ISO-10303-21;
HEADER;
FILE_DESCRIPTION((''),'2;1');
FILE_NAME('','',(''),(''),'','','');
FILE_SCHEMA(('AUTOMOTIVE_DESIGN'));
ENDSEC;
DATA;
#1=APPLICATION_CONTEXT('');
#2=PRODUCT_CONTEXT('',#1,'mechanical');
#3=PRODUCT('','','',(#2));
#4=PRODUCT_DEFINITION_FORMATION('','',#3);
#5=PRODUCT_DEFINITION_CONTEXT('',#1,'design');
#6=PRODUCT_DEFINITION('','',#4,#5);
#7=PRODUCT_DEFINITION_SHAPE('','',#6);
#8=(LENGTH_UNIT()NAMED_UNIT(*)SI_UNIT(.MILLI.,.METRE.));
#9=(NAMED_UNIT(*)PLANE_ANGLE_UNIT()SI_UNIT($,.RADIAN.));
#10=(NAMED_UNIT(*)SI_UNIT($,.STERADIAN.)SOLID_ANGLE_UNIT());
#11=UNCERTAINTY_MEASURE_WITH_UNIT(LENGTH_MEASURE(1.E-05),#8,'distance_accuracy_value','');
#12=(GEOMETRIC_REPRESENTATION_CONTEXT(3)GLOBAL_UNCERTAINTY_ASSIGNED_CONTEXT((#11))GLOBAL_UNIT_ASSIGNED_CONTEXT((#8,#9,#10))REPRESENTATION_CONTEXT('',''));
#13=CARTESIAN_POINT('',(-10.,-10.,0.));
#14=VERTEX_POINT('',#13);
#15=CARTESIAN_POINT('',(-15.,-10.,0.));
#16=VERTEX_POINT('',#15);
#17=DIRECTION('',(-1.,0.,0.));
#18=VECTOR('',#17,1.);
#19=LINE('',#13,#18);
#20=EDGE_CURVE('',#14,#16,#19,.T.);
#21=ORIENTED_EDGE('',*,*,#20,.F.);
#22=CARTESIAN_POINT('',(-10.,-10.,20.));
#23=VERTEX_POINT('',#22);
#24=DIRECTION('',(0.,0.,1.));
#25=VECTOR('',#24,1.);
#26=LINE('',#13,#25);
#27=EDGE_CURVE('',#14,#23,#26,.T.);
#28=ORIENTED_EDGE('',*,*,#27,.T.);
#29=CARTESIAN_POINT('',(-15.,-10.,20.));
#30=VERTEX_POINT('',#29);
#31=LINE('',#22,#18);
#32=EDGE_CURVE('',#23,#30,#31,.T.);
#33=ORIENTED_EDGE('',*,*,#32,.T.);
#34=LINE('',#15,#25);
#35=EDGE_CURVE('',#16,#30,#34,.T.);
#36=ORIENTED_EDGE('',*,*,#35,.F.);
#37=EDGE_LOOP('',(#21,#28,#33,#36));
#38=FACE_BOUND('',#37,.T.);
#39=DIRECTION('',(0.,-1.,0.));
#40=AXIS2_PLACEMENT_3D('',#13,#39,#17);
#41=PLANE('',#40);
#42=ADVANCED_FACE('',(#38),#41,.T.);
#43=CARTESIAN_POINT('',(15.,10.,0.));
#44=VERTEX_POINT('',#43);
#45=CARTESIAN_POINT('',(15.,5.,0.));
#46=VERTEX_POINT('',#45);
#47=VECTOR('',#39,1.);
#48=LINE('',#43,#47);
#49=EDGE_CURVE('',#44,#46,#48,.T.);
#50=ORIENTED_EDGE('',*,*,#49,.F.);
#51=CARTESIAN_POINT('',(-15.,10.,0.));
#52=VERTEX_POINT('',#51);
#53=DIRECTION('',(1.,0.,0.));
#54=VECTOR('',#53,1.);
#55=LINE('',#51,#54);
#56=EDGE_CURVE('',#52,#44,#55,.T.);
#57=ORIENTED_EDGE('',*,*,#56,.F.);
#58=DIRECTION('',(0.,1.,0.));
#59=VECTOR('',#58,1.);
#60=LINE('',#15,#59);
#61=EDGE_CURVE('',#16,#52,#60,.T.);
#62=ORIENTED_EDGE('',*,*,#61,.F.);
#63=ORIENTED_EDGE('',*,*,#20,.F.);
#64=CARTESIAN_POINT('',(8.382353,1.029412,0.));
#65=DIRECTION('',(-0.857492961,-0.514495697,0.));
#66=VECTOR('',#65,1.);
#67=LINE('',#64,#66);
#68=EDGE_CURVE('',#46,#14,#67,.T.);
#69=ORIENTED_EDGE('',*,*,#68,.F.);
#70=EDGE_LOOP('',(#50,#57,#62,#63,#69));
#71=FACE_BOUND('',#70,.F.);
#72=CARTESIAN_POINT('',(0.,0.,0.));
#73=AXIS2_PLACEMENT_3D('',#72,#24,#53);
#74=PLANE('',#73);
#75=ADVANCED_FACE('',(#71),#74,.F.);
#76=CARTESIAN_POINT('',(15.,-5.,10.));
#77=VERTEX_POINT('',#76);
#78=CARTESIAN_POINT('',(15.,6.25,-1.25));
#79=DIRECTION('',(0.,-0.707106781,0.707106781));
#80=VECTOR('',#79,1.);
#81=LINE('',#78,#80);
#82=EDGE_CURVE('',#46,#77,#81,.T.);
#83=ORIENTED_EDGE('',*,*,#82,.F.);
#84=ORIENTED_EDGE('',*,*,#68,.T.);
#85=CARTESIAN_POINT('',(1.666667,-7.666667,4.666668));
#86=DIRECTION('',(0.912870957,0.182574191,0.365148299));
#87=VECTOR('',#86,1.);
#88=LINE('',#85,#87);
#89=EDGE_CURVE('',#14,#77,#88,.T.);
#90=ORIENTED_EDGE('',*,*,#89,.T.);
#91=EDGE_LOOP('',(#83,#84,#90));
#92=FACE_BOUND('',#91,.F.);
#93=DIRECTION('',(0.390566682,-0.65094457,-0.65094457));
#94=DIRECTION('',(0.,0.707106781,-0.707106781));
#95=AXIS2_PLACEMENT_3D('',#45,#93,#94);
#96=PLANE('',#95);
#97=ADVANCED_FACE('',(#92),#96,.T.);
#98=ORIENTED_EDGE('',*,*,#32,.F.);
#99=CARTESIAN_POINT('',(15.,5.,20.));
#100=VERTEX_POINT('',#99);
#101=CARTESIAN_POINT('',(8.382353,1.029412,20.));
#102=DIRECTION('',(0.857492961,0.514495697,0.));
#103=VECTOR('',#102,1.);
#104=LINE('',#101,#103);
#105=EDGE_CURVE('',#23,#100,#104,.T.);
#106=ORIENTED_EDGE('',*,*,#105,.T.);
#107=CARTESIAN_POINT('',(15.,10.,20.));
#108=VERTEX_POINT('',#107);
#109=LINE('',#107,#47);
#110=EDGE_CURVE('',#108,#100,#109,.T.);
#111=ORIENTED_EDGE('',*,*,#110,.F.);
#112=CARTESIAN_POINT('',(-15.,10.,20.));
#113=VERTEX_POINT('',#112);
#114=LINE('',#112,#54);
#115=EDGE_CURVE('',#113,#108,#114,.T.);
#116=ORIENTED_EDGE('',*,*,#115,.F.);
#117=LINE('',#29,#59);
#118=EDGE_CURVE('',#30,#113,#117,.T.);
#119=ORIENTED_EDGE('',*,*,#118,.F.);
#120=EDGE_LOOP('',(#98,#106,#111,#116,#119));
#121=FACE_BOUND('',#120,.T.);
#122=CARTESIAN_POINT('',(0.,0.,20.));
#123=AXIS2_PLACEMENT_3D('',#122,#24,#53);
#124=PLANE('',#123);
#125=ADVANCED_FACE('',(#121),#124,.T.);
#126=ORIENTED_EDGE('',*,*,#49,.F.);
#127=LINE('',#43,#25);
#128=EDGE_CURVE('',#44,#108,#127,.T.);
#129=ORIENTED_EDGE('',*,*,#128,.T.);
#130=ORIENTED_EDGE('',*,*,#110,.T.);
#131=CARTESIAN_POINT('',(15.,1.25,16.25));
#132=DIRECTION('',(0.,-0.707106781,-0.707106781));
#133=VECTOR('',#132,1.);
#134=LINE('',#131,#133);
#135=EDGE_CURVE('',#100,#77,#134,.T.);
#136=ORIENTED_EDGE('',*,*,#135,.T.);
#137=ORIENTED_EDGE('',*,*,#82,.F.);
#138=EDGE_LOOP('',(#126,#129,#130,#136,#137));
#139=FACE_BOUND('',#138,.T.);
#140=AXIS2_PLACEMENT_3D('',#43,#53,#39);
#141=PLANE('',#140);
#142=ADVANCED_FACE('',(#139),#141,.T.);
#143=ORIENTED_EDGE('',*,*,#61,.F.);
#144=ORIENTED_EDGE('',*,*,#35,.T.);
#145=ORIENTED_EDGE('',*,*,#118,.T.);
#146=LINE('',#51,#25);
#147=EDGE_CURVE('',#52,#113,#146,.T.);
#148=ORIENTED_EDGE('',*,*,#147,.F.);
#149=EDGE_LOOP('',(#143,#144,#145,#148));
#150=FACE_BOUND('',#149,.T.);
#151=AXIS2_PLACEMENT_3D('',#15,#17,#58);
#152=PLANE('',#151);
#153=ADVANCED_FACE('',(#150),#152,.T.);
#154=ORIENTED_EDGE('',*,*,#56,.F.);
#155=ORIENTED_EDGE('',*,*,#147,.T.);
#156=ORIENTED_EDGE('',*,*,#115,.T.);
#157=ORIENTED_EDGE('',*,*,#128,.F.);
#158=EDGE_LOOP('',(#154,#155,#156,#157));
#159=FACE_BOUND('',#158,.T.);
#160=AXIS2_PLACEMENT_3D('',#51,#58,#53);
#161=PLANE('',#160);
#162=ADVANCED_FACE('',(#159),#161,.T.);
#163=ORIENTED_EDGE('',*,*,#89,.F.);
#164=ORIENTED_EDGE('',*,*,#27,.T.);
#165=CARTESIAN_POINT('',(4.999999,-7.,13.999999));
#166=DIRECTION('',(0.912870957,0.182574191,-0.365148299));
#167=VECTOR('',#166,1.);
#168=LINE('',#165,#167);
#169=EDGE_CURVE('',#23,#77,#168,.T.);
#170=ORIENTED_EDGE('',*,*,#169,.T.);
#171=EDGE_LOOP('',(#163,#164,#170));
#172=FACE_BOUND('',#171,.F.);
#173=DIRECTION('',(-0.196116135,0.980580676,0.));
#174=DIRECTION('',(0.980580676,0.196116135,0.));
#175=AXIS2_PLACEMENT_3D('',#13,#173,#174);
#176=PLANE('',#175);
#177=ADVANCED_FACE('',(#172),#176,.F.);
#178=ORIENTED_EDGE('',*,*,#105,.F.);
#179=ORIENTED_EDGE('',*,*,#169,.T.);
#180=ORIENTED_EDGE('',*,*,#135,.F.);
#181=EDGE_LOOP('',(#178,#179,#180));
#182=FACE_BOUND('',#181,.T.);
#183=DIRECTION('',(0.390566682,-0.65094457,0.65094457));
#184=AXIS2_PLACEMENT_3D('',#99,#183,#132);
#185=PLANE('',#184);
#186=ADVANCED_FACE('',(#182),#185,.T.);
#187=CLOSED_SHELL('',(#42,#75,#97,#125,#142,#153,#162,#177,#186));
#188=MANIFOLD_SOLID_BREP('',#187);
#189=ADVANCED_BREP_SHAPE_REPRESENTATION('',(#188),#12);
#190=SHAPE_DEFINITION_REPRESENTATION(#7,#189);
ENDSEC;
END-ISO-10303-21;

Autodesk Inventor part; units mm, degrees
ref_plane "YZ Plane" through (0, 0, 0) normal (1, 0, 0) x (0, 1, 0)
ref_plane "XZ Plane" through (0, 0, 0) normal (0, 1, 0) x (-1, 0, 0)
sketch "草圖1" plane through (0, 0, 0) normal (0, 0, 1) x (1, 0, 0)
  line L0 (-15, 10) -> (15, 10)
  line L1 (15, 10) -> (15, -5)
  line L2 (-10, -10) -> (-15, -10)
  line L3 (-15, -10) -> (-15, 10)
  line L4 (-10, -10) -> (15, -5)
  point P0 (0, 0)
  point P1 (-15, 0)
  point P2 (0, 10)
  dimension "d0" = 30
  dimension "d1" = 20
  dimension "d2" = 5
  dimension "d3" = 15
extrude "擠出1" add sketch "草圖1" along normal blind 20
sketch "草圖2" plane through (0, 0, 20) normal (0, 0, 1) x (1, 0, 0)
  line L0 (-15, -10) -> (-10, -10) projected
  line L1 (-10, -10) -> (15, 5)
  line L2 (15, -5) -> (15, 10) projected
  point P0 (0, 0)
  dimension "d6" = 5
sketch "草圖3" plane through (15, -5, 0) normal (1, 0, 0) x (0, 0, -1)
  line L0 (-20, 0) -> (-20, 15) construction
  line L1 (-20, 10) -> (-10, 0)
  line L2 (-20, -5) -> (-20, 10) construction
  point P0 (0, 5)
  dimension "d7" = 10
sketch "草圖4" plane through (15, -5, 0) normal (0.1961161, -0.9805807, 0) x (0.9805807, 0.1961161, 0)
  line L0 (-25.4951, 20) -> (1.9612, 20) construction
  line L1 (1.9612, 20) -> (0, 10) construction
  line L2 (-25.4951, 20) -> (0, 10)
  point P0 (-13.7281, 0)
ref_plane "工作平面1" through (15, 5, 20) normal (0.3905667, -0.6509446, 0.6509446) x (0, -0.7071068, -0.7071068)
sketch "草圖5" plane through (15, 5, 20) normal (0.3905667, -0.6509446, 0.6509446) x (0, -0.7071068, -0.7071068)
  line L0 (32.7788, -32.924) -> (-18.6727, -32.924)
  line L1 (-18.6727, -32.924) -> (-18.6727, 7.0938)
  line L2 (-18.6727, 7.0938) -> (32.7788, 7.0938)
  line L3 (32.7788, 7.0938) -> (32.7788, -32.924)
  point P0 (17.6777, -9.666)
extrude "擠出2" cut sketch "草圖5" along normal through all
sketch "草圖6" plane through (15, -5, 0) normal (1, 0, 0) x (0, 0, -1)
  line L0 (0, 0) -> (-10, 0) projected
  line L1 (-10, 0) -> (-10, 25.1202)
  point P0 (0, 5)
surface extrude "擠出表面1" sketch "草圖6" against normal blind 63.25 shown no curves L0 L1
mirror "鏡射1" about plane through (15, -5, 10) normal (0, 0, 1) of "擠出2"
properties part number "16"
